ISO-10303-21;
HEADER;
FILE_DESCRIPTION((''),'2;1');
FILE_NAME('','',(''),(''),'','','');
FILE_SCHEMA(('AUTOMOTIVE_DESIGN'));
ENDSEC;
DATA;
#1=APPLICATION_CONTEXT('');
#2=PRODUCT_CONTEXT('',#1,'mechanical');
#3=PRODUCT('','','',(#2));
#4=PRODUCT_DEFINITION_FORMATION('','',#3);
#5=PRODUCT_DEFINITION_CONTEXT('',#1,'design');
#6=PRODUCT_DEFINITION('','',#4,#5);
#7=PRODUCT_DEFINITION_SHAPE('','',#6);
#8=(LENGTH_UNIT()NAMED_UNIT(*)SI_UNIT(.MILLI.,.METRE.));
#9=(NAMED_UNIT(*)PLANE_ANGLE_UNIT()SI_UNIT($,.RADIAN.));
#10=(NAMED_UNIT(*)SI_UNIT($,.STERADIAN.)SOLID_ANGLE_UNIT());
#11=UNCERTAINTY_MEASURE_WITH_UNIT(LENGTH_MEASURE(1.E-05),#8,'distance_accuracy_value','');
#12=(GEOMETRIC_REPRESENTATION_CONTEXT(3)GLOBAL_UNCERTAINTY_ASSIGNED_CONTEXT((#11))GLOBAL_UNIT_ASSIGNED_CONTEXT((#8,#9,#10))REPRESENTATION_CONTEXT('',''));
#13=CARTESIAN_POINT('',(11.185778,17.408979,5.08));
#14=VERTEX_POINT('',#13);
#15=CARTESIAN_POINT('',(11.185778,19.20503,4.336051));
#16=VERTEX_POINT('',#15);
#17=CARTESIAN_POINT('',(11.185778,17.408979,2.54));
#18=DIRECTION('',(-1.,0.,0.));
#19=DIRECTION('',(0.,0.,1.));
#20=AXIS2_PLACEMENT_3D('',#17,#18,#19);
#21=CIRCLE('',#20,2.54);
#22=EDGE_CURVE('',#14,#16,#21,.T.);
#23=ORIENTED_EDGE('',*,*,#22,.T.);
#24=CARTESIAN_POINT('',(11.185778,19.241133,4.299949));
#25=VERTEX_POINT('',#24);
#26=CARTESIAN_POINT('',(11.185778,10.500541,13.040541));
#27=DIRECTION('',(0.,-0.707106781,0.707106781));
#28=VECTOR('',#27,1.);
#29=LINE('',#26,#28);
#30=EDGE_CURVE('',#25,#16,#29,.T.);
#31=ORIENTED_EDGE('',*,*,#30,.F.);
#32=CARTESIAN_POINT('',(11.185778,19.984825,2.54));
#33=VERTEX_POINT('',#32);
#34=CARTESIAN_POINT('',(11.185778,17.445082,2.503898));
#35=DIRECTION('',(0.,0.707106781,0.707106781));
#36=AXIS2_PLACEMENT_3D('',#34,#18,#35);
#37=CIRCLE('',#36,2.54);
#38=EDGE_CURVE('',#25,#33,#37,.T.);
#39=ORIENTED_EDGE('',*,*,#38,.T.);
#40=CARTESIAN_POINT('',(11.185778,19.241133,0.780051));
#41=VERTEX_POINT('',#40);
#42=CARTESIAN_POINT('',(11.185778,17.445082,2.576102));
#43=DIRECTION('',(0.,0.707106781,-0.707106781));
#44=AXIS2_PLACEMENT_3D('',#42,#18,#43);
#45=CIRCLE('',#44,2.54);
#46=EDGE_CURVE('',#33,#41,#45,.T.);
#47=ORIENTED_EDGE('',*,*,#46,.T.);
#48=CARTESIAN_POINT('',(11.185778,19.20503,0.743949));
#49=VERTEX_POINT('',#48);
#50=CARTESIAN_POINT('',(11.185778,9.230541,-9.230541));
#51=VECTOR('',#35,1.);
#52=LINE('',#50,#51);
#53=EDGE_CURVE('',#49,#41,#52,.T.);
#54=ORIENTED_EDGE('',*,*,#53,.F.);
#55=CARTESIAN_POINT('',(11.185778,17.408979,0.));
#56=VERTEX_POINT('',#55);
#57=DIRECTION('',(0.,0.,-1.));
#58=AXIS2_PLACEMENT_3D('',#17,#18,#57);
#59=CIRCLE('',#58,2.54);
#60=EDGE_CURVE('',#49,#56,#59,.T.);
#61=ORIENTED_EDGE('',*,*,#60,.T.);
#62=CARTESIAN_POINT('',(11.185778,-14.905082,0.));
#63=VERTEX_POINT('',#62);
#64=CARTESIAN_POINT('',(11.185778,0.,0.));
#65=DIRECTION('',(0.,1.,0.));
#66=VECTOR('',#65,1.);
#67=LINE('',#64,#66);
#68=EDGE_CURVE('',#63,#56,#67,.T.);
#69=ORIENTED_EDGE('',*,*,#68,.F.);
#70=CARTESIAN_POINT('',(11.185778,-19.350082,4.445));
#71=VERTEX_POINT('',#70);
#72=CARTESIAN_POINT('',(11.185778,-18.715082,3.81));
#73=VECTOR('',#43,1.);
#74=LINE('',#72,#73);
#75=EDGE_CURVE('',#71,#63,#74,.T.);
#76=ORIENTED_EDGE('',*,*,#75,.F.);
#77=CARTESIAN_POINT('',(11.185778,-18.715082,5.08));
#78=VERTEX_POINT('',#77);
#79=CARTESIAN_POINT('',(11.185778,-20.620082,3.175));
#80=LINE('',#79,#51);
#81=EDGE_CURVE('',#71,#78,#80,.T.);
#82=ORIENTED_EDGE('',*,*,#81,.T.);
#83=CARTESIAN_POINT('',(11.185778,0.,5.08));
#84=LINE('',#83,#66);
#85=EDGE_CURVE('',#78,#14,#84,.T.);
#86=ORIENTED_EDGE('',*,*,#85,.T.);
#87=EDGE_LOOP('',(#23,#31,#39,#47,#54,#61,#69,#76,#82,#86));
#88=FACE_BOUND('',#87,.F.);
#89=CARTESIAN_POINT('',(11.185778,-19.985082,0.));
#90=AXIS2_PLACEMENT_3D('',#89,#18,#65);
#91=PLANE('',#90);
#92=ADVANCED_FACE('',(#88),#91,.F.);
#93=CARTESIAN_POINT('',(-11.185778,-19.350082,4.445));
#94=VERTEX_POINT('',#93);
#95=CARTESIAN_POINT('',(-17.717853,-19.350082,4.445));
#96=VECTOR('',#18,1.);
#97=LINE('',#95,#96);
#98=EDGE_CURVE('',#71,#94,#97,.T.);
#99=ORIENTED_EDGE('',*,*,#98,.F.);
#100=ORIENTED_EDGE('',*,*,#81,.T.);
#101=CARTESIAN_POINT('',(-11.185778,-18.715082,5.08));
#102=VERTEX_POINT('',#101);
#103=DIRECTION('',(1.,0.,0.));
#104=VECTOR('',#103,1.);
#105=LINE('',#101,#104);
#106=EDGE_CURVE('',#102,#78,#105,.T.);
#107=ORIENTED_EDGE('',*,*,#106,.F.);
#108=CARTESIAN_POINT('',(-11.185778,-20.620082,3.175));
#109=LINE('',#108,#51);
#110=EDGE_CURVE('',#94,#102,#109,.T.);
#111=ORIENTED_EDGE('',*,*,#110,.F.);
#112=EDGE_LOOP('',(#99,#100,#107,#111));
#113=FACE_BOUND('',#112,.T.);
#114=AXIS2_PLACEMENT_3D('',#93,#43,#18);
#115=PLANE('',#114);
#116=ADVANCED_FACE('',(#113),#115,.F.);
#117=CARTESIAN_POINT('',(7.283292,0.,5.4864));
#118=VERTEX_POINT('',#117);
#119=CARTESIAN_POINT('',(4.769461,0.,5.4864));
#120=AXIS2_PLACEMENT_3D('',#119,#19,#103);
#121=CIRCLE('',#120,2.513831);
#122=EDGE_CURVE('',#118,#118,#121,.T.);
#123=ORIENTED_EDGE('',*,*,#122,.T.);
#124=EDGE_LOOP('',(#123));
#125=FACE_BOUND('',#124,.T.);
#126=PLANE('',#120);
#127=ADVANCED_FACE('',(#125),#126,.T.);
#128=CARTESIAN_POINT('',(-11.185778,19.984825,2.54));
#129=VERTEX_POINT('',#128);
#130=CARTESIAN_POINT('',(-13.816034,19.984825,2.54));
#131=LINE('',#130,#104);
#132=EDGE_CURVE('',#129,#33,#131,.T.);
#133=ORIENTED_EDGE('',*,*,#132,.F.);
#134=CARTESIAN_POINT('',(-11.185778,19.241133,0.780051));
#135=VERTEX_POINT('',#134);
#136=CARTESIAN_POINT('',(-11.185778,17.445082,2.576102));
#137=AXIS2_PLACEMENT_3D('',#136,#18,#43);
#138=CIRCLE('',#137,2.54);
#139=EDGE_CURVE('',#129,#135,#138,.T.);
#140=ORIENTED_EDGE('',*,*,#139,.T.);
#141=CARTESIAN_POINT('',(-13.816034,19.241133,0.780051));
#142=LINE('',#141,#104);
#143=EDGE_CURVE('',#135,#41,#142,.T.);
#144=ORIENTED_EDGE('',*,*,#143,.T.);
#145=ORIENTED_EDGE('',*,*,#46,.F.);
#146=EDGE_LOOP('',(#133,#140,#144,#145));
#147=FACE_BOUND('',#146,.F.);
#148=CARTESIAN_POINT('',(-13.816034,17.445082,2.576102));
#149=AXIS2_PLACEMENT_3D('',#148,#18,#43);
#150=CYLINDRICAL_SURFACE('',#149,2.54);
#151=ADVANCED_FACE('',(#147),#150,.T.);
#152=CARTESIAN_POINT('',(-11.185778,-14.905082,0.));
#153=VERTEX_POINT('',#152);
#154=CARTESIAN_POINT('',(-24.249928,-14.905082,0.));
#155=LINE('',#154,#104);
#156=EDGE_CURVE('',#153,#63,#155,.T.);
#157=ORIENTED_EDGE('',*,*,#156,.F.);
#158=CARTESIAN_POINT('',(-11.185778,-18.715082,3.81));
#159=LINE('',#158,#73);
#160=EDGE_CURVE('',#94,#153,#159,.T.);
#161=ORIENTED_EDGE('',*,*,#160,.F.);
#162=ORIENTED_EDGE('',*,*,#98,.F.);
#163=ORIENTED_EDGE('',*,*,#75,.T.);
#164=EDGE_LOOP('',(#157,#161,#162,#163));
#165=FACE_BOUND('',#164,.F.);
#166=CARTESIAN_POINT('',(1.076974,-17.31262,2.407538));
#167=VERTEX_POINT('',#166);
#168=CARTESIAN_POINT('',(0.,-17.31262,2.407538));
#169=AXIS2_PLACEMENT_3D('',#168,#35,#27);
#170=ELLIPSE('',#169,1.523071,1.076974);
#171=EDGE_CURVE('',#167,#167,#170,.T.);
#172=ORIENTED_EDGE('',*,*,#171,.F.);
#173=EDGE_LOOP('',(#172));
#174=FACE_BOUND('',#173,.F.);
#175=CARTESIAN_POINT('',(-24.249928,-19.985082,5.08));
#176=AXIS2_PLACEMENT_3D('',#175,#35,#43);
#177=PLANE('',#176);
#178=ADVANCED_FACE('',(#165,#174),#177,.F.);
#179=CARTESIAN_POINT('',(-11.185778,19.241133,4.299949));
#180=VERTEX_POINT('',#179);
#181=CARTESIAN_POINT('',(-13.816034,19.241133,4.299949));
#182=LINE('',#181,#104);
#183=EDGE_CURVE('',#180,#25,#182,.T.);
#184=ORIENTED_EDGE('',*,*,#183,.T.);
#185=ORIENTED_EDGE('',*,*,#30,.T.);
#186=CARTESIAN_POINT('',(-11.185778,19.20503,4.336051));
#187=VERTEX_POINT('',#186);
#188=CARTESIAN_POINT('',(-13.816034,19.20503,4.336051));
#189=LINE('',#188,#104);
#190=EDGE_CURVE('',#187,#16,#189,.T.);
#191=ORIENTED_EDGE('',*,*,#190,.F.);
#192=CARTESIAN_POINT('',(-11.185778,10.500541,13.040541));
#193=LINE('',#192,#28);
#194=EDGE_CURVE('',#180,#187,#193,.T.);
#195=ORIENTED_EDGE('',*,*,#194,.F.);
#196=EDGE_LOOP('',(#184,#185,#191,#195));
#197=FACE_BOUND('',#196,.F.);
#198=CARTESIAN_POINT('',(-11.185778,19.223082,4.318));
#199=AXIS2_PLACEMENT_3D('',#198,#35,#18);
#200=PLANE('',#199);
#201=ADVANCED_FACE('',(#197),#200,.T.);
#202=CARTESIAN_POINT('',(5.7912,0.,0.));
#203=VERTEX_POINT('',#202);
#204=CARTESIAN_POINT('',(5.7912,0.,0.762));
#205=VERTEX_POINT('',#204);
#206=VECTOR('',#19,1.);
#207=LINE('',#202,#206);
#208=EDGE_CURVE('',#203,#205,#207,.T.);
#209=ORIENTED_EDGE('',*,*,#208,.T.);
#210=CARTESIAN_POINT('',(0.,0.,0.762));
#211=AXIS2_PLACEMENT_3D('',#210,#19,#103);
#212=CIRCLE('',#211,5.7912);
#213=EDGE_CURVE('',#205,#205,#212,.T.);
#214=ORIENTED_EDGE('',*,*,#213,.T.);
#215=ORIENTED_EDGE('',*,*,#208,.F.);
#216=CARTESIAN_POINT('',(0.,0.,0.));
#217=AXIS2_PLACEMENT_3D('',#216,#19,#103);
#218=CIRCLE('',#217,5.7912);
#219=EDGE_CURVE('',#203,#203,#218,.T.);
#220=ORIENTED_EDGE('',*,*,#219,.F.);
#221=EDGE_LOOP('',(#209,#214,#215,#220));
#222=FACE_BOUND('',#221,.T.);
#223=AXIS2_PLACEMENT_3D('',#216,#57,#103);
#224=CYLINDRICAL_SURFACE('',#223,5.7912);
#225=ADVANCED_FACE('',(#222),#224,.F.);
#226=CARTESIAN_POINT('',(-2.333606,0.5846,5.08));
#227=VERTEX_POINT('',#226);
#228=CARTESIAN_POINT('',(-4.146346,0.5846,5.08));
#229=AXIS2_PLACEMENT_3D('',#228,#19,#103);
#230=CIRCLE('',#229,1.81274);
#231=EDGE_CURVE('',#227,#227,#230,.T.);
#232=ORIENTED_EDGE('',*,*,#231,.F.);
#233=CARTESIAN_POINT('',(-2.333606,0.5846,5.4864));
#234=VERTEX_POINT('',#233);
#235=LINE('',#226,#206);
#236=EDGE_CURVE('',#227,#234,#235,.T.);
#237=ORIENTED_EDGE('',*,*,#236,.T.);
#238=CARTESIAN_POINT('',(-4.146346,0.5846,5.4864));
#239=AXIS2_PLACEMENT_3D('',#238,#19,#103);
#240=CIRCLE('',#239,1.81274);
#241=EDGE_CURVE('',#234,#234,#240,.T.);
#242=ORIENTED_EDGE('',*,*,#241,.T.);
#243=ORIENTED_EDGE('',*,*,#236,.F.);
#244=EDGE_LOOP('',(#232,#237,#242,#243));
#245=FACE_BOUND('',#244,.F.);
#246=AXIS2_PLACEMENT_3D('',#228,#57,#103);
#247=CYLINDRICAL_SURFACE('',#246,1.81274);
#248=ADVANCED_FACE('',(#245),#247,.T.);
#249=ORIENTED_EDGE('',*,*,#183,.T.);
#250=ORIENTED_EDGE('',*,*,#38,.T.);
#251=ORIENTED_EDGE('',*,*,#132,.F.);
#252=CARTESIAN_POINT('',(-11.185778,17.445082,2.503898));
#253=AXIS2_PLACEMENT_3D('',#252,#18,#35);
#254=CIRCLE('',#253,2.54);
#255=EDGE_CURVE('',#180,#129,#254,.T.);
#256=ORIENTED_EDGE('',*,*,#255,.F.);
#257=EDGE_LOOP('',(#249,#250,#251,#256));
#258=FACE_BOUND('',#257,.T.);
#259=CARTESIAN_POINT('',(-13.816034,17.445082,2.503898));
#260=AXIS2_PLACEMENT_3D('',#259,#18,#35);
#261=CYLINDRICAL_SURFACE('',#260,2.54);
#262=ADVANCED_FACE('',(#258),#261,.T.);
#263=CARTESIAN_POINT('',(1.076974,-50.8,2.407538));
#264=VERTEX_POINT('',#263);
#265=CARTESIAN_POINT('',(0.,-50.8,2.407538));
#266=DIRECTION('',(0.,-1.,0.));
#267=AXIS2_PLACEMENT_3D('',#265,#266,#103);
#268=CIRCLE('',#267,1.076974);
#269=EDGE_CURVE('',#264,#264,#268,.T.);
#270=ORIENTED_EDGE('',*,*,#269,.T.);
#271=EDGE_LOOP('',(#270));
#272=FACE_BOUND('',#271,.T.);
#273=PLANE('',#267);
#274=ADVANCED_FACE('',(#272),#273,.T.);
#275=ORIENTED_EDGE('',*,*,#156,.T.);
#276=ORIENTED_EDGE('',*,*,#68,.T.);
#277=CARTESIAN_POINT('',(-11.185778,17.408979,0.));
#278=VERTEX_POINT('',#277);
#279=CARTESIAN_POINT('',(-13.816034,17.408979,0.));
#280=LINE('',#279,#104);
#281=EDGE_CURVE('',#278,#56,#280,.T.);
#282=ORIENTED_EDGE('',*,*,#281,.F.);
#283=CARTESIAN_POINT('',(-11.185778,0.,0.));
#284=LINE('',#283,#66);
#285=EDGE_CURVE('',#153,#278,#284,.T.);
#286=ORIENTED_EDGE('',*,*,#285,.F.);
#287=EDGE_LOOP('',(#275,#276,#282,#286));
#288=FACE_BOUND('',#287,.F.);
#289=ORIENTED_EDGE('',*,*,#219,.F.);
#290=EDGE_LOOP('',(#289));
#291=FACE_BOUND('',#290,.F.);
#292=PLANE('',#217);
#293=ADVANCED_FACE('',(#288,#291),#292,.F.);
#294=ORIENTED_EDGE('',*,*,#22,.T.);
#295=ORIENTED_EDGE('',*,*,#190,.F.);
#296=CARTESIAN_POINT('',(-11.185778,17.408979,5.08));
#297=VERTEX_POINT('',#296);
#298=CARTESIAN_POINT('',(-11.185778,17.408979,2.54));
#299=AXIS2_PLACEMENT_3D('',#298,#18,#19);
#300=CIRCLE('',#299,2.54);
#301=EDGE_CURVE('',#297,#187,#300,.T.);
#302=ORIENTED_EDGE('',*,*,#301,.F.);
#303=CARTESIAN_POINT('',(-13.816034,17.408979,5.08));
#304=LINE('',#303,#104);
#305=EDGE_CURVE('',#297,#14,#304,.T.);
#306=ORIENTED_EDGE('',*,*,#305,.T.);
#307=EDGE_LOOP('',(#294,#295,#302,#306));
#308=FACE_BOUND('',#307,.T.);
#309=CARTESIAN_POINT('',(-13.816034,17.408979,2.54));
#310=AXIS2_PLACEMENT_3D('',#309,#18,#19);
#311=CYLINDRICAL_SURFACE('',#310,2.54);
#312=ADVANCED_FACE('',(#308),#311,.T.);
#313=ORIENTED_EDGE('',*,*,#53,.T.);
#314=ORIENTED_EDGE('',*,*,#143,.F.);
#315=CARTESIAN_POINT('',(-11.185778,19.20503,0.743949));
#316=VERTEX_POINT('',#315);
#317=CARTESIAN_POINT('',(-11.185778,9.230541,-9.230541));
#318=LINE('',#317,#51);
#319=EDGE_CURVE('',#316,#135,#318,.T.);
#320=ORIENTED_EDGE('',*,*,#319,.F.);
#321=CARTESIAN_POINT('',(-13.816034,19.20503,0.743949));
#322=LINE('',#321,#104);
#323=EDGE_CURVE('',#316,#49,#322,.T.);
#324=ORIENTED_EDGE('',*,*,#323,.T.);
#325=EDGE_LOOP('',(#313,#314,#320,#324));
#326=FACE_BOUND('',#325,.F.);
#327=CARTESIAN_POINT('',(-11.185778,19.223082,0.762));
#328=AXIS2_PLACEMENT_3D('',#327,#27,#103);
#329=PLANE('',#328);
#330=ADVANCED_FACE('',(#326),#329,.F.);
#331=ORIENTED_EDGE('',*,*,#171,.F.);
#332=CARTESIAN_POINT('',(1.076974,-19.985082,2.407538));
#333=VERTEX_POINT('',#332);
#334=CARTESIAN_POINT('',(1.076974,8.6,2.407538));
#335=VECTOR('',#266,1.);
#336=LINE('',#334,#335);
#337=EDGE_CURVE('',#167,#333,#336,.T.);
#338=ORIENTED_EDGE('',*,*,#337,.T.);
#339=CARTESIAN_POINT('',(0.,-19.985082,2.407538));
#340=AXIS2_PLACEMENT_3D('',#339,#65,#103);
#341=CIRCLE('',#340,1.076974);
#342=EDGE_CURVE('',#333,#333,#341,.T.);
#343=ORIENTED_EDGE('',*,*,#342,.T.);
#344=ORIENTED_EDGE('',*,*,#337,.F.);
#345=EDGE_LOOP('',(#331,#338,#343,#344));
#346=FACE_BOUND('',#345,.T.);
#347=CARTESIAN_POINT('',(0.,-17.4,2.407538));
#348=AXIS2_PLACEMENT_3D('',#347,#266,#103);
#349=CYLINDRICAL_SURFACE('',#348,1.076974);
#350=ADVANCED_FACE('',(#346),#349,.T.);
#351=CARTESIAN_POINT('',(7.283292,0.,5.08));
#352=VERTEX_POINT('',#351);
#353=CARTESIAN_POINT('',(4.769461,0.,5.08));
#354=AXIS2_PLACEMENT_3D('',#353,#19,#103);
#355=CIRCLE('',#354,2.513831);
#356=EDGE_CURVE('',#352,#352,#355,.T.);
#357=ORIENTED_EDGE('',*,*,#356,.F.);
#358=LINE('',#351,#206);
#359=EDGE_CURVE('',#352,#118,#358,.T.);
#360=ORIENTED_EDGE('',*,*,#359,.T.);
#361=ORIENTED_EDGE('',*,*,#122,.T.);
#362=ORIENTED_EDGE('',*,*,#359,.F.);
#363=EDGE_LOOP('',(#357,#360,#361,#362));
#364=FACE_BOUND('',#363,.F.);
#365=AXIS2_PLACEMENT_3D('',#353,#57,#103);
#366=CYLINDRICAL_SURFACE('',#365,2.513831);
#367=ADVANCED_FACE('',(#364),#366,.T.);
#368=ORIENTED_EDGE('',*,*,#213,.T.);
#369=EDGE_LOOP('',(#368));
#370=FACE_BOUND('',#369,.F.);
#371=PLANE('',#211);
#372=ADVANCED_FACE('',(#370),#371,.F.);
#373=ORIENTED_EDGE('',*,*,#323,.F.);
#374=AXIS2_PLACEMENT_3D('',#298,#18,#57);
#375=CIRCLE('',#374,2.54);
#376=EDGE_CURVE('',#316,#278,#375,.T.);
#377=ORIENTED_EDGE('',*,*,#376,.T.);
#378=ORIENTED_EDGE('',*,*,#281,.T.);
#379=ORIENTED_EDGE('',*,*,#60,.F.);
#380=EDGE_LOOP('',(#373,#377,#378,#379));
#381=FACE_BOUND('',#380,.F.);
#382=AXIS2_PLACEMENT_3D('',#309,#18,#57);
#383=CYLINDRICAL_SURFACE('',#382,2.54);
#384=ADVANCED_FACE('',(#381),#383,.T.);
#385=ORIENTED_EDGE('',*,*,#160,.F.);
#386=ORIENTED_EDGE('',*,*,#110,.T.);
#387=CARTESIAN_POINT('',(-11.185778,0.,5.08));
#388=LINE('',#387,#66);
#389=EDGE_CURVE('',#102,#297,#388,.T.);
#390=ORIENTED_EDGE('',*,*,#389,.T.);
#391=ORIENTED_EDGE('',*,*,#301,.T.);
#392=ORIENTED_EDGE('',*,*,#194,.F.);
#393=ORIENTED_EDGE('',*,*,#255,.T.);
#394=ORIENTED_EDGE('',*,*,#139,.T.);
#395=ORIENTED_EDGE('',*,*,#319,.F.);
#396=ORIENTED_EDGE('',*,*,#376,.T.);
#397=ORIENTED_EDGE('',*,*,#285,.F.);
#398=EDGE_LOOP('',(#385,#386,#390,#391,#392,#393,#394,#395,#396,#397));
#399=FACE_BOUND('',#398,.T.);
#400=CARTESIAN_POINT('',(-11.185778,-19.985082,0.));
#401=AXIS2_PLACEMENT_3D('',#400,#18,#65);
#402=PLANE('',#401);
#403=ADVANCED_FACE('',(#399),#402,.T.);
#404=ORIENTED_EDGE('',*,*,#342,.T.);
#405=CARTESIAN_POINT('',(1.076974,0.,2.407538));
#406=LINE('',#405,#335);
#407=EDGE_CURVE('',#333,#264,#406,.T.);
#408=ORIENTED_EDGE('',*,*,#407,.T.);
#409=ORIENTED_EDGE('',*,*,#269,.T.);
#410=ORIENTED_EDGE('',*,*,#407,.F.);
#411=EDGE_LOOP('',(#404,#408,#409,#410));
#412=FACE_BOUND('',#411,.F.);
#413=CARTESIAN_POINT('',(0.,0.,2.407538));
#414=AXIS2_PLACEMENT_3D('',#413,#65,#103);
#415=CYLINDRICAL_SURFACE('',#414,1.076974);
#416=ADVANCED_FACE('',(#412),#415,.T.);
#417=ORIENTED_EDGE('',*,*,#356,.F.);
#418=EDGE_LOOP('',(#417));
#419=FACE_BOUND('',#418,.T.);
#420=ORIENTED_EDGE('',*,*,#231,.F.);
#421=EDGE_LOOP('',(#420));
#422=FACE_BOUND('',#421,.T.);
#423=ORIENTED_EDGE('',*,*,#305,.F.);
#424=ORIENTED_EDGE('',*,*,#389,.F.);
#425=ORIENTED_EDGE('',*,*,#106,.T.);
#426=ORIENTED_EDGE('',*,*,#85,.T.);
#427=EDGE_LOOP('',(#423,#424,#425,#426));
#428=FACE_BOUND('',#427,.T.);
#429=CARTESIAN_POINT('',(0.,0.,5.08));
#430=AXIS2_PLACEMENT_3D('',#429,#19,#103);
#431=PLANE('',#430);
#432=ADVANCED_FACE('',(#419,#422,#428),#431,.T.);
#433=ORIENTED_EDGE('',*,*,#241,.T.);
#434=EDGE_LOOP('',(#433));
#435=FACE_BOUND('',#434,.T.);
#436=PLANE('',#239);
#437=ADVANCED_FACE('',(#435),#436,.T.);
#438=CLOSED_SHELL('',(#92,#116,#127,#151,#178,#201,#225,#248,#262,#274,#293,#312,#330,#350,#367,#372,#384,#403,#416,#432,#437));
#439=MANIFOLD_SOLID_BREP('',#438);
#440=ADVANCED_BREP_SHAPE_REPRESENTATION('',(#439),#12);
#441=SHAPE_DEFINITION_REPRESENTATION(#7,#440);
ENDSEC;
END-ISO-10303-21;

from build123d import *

# Parameters (mm, degrees)
F0_W         = 22.3715566099
F0_H         = 39.9701632559
F1_DEPTH     = 5.08
F2_R         = 5.7912
F3_DEPTH     = 0.762
F4_R         = 1.0769741324
F5_DEPTH     = 50.8
F6_R         = 1.8127400762
F6_R_2       = 2.5138312633
F7_DEPTH     = 0.4064
F8_SIZE      = 1.27
F9_T4_DEPTH  = 48.4998557676
F9_S5_R      = 1.0769741324
F9_T6_DEPTH  = 26
F10_SIZE     = 1.524
F11_T1_DEPTH = 27.632068852


# Not quite as in the source:
# - a fillet or chamfer that OpenCascade refuses, or shapes differently, is made with other operations: its cross-section is extruded or revolved along the edge and cut away or added


with BuildPart() as f1:
    # F0 (on Top) → F1 (new body)
    with BuildSketch(Plane.XY):
        Rectangle(F0_W, F0_H)
    extrude(amount=F1_DEPTH)

    # F2 (on Top) → F3 (cut)
    with BuildSketch(Plane.XY):
        Circle(F2_R)
    extrude(amount=F3_DEPTH, mode=Mode.SUBTRACT)

    # F4 (on Front) → F5 (join)
    with BuildSketch(Plane.XZ):
        with Locations((0, 2.4075380061)):
            Circle(F4_R)
    extrude(amount=F5_DEPTH)

    # F6 (on face) → F7 (join)
    with BuildSketch(Plane.XY.offset(5.08)):
        with Locations((-4.1463463567, 0.584599562)):
            Circle(F6_R)
        with Locations((4.7694612294, 0)):
            Circle(F6_R_2)
    extrude(amount=F7_DEPTH)

    # F8
    f8_edges = [f1.edges().sort_by_distance(p)[0] for p in [
        (0, -19.985082, 5.08),
    ]]
    chamfer(f8_edges, length=F8_SIZE)

    # F9: chamfer of 5.08 on 1 edges, made by hand


with BuildPart() as f9_tool2:
    # F9_s3 → F9_t4 (new body)
    with BuildSketch(Plane.YZ.offset(-24.2499278838)):
        Polygon((-19.985081628, 5.08), (-14.905081628, 0), (-19.985081628, 0), align=None)
    extrude(amount=F9_T4_DEPTH)

    # F9_s5 → F9_t6 (cut, symmetric)
    with BuildSketch(Plane.XZ.offset(17.4)):
        with Locations((0, 2.4075380061)):
            Circle(F9_S5_R)
    extrude(amount=F9_T6_DEPTH, both=True, mode=Mode.SUBTRACT)


with BuildPart() as f1_1:
    add(f1.part)

    # F9_t1: cut F9_tool2
    add(f9_tool2.part, mode=Mode.SUBTRACT)

    # F10
    f10_edges = [f1_1.edges().sort_by_distance(p)[0] for p in [
        (0, 19.985082, 5.08),
        (0, 19.985082, 0),
    ]]
    chamfer(f10_edges, length=F10_SIZE)

    # F11: fillet of radius 2.54 on 4 edges, made by hand

    # F11_s2 → F11_t1 (cut)
    with BuildSketch(Plane.YZ.offset(-13.816034426)):
        with BuildLine():
            ThreePointArc((17.4089791795, 5.08), (18.3809950977, 4.8866540126), (19.2050304038, 4.3360512242))
            Line((19.2050304038, 4.3360512242), (18.461081628, 5.08))
            Line((18.461081628, 5.08), (17.4089791795, 5.08))
        make_face()
        with BuildLine():
            ThreePointArc((19.2411328522, 4.2999487758), (19.7917356405, 3.4759134698), (19.985081628, 2.5038975516))
            Line((19.985081628, 2.5038975516), (19.985081628, 3.556))
            Line((19.985081628, 3.556), (19.2411328522, 4.2999487758))
        make_face()
        with BuildLine():
            ThreePointArc((19.2411328522, 0.7800512242), (19.7917356405, 1.6040865302), (19.985081628, 2.5761024484))
            Line((19.985081628, 2.5761024484), (19.985081628, 1.524))
            Line((19.985081628, 1.524), (19.2411328522, 0.7800512242))
        make_face()
        with BuildLine():
            ThreePointArc((17.4089791795, 0), (18.3809950977, 0.1933459874), (19.2050304038, 0.7439487758))
            Line((19.2050304038, 0.7439487758), (18.461081628, 0))
            Line((18.461081628, 0), (17.4089791795, 0))
        make_face()
    extrude(amount=F11_T1_DEPTH, mode=Mode.SUBTRACT)


solid = f1_1.part
